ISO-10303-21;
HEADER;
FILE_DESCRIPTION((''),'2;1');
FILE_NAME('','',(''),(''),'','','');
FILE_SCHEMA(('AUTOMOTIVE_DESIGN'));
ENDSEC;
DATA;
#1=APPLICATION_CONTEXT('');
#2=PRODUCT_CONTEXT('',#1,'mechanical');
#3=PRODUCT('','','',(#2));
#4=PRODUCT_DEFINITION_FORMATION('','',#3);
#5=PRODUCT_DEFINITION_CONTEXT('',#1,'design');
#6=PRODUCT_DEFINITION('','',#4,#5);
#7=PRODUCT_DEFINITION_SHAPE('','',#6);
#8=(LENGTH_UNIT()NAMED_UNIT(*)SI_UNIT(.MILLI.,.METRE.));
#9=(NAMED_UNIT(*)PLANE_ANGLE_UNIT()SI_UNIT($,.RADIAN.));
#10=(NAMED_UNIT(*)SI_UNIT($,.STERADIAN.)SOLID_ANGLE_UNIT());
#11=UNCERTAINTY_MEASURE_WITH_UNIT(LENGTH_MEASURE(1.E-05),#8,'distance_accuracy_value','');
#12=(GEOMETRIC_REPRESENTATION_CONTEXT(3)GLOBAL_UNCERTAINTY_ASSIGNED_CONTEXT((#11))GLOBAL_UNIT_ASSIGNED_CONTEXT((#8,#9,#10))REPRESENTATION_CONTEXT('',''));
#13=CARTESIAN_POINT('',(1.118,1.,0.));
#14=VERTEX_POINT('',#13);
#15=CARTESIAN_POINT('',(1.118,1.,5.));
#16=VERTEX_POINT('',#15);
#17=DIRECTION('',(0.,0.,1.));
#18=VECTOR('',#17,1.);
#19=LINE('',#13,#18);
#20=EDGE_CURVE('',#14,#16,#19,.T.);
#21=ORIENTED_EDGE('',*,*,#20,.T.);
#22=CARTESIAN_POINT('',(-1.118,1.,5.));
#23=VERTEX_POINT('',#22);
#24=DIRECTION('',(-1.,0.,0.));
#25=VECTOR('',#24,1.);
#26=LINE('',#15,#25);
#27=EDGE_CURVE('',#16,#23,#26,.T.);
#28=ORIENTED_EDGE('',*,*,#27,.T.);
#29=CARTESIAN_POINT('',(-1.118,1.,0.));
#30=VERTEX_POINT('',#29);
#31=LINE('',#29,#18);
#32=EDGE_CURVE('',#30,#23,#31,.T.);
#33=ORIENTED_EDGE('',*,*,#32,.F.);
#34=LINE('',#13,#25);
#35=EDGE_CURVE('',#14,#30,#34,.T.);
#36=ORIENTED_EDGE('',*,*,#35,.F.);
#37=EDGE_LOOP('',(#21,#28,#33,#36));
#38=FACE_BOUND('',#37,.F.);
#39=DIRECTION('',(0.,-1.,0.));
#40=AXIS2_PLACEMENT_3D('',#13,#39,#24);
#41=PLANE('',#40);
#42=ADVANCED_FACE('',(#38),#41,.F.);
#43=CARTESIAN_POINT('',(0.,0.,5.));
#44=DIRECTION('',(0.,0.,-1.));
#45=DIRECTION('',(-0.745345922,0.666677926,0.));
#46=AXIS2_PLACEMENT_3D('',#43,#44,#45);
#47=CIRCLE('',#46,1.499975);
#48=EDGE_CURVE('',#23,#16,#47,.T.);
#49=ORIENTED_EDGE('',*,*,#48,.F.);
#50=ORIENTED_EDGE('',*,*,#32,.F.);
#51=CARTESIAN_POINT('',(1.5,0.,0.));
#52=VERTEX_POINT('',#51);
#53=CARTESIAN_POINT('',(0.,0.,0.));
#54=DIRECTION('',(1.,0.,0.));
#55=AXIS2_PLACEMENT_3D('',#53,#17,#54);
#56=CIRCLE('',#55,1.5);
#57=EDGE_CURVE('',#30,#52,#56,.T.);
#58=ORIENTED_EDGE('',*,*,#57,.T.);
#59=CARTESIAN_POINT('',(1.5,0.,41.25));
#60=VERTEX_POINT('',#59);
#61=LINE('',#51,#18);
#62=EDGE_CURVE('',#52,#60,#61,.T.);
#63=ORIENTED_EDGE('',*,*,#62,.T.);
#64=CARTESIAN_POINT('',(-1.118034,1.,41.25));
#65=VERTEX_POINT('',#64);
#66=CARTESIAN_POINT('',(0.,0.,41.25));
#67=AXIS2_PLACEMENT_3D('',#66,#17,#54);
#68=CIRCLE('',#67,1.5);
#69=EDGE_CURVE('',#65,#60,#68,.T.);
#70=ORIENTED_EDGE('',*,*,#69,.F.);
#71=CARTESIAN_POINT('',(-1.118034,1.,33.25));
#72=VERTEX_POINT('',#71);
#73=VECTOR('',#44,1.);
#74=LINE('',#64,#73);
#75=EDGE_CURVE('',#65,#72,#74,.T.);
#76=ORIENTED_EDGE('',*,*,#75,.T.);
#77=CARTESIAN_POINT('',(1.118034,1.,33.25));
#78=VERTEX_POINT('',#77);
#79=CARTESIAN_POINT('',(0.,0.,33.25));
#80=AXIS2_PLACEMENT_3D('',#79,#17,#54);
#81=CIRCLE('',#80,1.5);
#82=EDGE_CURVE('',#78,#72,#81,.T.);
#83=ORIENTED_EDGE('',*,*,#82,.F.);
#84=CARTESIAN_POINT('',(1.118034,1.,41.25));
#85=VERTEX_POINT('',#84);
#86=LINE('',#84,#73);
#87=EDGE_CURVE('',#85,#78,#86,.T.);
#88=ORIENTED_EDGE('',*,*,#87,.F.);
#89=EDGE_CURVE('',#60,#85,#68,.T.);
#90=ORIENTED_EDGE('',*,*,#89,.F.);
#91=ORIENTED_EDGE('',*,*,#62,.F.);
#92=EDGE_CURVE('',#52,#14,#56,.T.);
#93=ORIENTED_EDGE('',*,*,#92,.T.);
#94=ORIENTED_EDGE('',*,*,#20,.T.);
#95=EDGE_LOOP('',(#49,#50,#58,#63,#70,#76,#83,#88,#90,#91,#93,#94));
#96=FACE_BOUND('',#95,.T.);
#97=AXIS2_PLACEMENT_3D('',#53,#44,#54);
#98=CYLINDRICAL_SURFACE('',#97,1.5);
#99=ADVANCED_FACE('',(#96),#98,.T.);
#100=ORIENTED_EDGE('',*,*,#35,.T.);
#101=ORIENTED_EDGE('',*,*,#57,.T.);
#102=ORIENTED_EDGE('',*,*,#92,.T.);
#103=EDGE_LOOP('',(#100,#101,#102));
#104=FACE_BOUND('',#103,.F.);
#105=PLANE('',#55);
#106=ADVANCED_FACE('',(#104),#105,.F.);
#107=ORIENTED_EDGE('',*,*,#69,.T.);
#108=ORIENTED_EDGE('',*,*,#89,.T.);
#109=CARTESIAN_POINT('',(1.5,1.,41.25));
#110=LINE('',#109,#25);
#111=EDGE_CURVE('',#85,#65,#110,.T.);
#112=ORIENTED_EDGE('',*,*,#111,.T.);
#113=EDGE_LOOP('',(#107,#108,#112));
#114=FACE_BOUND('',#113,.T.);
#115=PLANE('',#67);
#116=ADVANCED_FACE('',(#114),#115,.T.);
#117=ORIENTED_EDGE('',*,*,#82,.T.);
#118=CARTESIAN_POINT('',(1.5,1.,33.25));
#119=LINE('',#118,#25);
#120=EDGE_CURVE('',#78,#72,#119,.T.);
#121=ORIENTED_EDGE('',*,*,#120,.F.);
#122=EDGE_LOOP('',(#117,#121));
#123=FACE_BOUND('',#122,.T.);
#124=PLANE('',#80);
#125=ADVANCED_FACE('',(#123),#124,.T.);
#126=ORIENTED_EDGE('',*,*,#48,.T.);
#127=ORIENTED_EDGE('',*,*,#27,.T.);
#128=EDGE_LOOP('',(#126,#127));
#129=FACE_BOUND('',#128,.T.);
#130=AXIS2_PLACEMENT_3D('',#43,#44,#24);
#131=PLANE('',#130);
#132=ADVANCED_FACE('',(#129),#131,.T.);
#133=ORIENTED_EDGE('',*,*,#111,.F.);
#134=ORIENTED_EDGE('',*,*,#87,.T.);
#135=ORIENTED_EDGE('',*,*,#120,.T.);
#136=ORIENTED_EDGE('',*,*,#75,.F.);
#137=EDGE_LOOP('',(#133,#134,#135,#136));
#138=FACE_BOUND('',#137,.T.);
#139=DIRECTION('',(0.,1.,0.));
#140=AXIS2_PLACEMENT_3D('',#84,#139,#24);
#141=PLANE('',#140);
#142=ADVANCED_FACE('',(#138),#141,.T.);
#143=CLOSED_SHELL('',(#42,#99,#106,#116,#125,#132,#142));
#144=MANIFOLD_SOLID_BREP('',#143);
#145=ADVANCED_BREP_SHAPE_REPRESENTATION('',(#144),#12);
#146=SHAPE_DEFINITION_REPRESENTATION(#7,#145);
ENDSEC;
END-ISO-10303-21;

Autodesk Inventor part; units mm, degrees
ref_plane "YZ Plane" through (0, 0, 0) normal (1, 0, 0) x (0, 1, 0)
ref_plane "XZ Plane" through (0, 0, 0) normal (0, 1, 0) x (-1, 0, 0)
ref_plane "XY Plane" through (0, 0, 0) normal (0, 0, 1) x (1, 0, 0)
sketch "Эскиз1" plane through (0, 0, 0) normal (0, 0, 1) x (1, 0, 0)
  circle A0 centre (0, 0) radius 1.5
  dimension "d0" = 3
extrude "Выдавливание1" add sketch "Эскиз1" along normal blind 41.25
sketch "Эскиз2" plane through (0, 0, 41.25) normal (0, 0, 1) x (1, 0, 0)
  line L0 (-1.5, -1) -> (1.5, -1)
  line L1 (1.5, -1) -> (1.5, 1)
  line L2 (1.5, 1) -> (-1.5, 1)
  line L3 (-1.5, 1) -> (-1.5, -1)
  line L4 (-1.5, -1) -> (1.5, 1) construction
  line L5 (1.5, -1) -> (-1.5, 1) construction
  circle A0 centre (0, 0) radius 1.5
  point P0 (-1.118, 1)
  point P1 (1.118, 1)
  dimension "d3" = 2
extrude "Выдавливание2" cut sketch "Эскиз2" against normal blind 8 contours A0 L2
sketch "Эскиз3" plane through (0, 0, 0) normal (0, 0, -1) x (-1, 0, 0)
  arc A0 (1.118, 1) -> (-1.118, 1) centre (0, 0) ccw projected
  line L0 (-1.118, 1) -> (1.118, 1) projected
extrude "Выдавливание3" cut sketch "Эскиз3" against normal blind 5
equation "\"Радиус_гибки\" = Толщина"
equation "\"Ширина_просечки\" = Толщина"
equation "\"Глубина_просечки\" = 0.5 * Толщина"
equation "\"Размер_просечки\" = 4 * Толщина"
equation "\"Мин_остаток\" = 2 * Толщина"
equation "\"Радиус_перехода\" = Радиус_гибки"
equation "\"Радиус_Якоби\" = Толщина"
equation "\"Размер_зазора\" = Толщина"
equation "\"Толщина\" = 0.5"
properties part number "Ось 3мм задняя"
